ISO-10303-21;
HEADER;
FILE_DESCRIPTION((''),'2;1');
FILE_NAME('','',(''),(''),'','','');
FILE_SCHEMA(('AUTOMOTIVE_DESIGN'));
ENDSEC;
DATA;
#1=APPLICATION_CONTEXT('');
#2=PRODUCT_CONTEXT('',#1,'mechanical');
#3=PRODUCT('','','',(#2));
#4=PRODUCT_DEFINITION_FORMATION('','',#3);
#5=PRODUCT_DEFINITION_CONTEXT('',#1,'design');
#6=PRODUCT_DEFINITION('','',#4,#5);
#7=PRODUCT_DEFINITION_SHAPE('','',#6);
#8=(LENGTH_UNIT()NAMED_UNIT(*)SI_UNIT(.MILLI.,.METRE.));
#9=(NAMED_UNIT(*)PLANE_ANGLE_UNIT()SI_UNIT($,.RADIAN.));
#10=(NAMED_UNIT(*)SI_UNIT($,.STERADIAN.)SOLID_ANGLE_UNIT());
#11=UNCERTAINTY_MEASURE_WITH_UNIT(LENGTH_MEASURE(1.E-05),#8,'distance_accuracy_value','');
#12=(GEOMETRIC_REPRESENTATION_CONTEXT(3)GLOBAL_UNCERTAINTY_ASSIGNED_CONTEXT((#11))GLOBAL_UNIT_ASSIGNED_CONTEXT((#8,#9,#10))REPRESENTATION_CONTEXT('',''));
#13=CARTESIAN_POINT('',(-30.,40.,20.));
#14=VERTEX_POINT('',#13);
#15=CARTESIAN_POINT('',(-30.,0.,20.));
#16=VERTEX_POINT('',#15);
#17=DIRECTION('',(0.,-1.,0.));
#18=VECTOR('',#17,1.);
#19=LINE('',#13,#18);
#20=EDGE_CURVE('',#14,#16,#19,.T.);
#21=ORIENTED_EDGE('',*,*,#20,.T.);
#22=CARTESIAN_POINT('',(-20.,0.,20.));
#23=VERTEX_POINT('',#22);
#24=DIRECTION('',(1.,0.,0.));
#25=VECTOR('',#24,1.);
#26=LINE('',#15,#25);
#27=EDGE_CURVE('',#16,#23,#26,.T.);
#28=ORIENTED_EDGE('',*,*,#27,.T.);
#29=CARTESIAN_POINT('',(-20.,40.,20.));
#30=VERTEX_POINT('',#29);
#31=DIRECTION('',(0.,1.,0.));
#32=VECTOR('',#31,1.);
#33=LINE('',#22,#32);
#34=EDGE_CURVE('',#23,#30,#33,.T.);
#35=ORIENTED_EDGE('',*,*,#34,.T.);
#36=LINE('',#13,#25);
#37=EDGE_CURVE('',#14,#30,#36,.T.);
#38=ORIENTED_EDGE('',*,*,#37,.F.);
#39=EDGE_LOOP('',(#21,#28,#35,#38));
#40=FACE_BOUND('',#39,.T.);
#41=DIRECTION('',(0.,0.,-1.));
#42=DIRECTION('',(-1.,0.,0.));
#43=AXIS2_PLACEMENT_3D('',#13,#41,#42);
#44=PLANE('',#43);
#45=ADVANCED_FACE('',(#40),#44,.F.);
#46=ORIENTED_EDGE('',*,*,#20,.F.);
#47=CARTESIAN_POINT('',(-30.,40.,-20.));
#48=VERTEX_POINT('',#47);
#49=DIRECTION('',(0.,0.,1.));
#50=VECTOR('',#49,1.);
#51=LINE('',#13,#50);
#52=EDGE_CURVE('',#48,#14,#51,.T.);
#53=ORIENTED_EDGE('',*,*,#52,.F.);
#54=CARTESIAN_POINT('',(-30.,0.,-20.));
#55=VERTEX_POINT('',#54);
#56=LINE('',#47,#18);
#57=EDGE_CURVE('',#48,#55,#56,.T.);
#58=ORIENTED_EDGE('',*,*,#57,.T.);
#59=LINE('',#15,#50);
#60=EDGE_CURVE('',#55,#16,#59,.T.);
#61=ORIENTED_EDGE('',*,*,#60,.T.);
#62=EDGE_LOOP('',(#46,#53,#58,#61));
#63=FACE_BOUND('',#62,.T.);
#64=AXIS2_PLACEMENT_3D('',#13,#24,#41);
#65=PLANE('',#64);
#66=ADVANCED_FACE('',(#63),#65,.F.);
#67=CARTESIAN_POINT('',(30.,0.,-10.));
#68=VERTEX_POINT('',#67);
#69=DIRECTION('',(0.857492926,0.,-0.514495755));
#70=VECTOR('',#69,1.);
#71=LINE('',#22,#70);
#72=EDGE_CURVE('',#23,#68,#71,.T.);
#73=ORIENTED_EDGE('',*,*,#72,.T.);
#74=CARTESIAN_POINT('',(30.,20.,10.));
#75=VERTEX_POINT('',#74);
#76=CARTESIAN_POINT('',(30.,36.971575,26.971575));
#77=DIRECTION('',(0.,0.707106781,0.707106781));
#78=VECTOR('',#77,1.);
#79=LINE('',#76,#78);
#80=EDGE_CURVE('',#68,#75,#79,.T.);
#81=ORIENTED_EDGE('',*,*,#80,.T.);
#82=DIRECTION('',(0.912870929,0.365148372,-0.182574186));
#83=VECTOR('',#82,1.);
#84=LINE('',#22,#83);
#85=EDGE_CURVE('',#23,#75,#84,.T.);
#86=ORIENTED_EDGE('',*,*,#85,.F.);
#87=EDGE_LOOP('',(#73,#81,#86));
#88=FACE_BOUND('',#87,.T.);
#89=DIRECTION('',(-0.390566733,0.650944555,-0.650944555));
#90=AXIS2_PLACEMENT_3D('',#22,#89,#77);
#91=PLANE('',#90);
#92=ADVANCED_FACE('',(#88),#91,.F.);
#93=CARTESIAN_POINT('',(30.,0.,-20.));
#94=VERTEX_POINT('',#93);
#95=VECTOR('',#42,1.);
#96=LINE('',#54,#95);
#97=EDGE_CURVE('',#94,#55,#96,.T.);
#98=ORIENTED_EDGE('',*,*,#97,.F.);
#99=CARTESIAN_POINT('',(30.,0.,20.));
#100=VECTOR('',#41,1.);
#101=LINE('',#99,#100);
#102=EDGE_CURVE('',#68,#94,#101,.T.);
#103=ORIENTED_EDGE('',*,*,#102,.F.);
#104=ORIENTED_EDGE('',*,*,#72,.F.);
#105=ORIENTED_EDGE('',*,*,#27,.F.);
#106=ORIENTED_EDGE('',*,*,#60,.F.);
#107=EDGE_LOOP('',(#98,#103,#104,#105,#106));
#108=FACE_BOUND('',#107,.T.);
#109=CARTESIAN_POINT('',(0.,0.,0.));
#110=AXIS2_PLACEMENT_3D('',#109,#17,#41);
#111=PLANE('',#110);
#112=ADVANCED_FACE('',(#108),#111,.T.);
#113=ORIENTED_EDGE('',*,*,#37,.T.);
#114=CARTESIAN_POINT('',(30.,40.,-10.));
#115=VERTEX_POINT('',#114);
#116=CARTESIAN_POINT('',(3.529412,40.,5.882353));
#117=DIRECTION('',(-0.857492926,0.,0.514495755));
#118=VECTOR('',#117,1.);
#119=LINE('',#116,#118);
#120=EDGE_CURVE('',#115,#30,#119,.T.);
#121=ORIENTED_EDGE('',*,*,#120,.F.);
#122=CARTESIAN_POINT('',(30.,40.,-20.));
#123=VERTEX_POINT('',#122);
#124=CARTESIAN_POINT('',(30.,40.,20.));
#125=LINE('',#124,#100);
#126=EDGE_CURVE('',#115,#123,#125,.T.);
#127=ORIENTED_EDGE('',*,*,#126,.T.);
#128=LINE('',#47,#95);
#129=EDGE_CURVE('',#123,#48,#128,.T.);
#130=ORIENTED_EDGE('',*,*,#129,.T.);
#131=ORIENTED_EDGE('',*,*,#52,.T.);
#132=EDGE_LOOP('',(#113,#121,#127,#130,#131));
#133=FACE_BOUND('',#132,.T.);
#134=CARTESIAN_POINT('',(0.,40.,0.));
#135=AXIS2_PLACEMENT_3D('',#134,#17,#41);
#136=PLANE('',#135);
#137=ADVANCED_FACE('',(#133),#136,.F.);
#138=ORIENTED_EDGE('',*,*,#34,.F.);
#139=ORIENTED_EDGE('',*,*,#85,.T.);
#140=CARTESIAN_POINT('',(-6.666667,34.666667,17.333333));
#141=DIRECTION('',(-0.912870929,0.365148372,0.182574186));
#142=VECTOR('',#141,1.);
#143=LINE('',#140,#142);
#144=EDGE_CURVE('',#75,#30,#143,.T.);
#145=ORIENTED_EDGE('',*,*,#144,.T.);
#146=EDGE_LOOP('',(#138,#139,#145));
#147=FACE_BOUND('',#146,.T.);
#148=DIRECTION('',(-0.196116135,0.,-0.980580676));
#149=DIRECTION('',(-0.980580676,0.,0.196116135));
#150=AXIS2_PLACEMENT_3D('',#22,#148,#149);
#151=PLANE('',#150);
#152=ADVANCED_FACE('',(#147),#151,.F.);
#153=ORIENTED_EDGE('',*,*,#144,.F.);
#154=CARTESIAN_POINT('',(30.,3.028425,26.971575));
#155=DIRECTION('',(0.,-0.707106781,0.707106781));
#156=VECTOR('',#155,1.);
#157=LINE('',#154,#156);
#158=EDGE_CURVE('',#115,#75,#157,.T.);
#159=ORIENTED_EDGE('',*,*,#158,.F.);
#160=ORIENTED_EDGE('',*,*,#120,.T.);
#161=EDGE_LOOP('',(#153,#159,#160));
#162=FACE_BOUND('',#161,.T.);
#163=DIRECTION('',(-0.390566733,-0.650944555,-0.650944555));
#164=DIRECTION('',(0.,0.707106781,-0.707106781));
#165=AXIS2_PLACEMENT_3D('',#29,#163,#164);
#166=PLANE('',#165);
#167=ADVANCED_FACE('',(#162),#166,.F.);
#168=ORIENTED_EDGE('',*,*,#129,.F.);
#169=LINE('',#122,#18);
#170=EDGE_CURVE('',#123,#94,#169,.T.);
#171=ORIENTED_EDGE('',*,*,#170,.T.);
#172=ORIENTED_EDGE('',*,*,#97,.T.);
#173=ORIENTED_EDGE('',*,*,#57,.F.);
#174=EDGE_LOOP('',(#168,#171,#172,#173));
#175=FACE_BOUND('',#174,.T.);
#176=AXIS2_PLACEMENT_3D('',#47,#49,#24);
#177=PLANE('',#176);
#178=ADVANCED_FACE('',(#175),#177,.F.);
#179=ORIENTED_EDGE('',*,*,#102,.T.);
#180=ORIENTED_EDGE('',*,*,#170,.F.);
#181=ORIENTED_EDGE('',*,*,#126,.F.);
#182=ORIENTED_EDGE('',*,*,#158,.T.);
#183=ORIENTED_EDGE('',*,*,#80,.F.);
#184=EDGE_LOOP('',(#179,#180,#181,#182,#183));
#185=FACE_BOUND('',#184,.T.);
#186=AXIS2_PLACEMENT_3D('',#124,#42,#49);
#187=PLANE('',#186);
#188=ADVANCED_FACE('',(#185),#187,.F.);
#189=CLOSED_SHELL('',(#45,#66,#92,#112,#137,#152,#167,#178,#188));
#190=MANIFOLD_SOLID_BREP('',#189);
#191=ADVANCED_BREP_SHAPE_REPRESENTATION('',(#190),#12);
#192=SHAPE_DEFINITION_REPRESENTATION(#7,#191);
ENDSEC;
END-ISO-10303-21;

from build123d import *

# Parameters (mm, degrees)
SKETCH_1_W              = 60
SKETCH_1_H              = 40
EXTRUDE_1_DEPTH         = 40
CUT_EXTRUDE_1_DEPTH     = 54.851648071
CUT_EXTRUDE_START       = 31.245338635
CUT_EXTRUDE_2_OUTLINE_W = 57
CUT_EXTRUDE_2_OUTLINE_H = 31
CUT_EXTRUDE_2_DEPTH     = 13.018891098
CUT_EXTRUDE_START_2     = 5.207556439
CUT_EXTRUDE_3_OUTLINE_W = 57
CUT_EXTRUDE_3_OUTLINE_H = 32
CUT_EXTRUDE_3_DEPTH     = 13.018891098


# Read off the part's stored shape, not the designer's step: 除料-伸長2, 除料-伸長3
with BuildPart() as part:
    # 草圖1 → 填料-伸長1 (new body)
    with BuildSketch(Plane(origin=(0, 0, 0), x_dir=(1, 0, 0), z_dir=(0, 1, 0))):
        Rectangle(SKETCH_1_W, SKETCH_1_H)
    extrude(amount=EXTRUDE_1_DEPTH)

    # 草圖2 → 除料-伸長1 (cut, through all)
    with BuildSketch(Plane(origin=(0, 40, 0), x_dir=(1, 0, 0), z_dir=(0, 1, 0))):
        Polygon((-20, -20), (30, -10), (30, -20), align=None)
    extrude(amount=-CUT_EXTRUDE_1_DEPTH, mode=Mode.SUBTRACT)

    # 除料-伸長2 outline → 除料-伸長2 (cut)
    with BuildSketch(Plane(origin=(0, 0, 0), x_dir=(0.9205746178983231, -0.27617238536949745, -0.27617238536949745), z_dir=(0.3905667329424722, 0.6509445549041193, 0.6509445549041193)).offset(CUT_EXTRUDE_START)):
        with Locations((-7.5, 21.5)):
            Rectangle(CUT_EXTRUDE_2_OUTLINE_W, CUT_EXTRUDE_2_OUTLINE_H)
    extrude(amount=CUT_EXTRUDE_2_DEPTH, mode=Mode.SUBTRACT)

    # 除料-伸長3 outline → 除料-伸長3 (cut)
    with BuildSketch(Plane(origin=(0, 0, 0), x_dir=(0.9205746178983235, 0.27617238536949645, -0.2761723853694968), z_dir=(0.3905667329424711, -0.6509445549041191, 0.65094455490412)).offset(CUT_EXTRUDE_START_2)):
        with Locations((3.5, 7)):
            Rectangle(CUT_EXTRUDE_3_OUTLINE_W, CUT_EXTRUDE_3_OUTLINE_H)
    extrude(amount=CUT_EXTRUDE_3_DEPTH, mode=Mode.SUBTRACT)


solid = part.part
